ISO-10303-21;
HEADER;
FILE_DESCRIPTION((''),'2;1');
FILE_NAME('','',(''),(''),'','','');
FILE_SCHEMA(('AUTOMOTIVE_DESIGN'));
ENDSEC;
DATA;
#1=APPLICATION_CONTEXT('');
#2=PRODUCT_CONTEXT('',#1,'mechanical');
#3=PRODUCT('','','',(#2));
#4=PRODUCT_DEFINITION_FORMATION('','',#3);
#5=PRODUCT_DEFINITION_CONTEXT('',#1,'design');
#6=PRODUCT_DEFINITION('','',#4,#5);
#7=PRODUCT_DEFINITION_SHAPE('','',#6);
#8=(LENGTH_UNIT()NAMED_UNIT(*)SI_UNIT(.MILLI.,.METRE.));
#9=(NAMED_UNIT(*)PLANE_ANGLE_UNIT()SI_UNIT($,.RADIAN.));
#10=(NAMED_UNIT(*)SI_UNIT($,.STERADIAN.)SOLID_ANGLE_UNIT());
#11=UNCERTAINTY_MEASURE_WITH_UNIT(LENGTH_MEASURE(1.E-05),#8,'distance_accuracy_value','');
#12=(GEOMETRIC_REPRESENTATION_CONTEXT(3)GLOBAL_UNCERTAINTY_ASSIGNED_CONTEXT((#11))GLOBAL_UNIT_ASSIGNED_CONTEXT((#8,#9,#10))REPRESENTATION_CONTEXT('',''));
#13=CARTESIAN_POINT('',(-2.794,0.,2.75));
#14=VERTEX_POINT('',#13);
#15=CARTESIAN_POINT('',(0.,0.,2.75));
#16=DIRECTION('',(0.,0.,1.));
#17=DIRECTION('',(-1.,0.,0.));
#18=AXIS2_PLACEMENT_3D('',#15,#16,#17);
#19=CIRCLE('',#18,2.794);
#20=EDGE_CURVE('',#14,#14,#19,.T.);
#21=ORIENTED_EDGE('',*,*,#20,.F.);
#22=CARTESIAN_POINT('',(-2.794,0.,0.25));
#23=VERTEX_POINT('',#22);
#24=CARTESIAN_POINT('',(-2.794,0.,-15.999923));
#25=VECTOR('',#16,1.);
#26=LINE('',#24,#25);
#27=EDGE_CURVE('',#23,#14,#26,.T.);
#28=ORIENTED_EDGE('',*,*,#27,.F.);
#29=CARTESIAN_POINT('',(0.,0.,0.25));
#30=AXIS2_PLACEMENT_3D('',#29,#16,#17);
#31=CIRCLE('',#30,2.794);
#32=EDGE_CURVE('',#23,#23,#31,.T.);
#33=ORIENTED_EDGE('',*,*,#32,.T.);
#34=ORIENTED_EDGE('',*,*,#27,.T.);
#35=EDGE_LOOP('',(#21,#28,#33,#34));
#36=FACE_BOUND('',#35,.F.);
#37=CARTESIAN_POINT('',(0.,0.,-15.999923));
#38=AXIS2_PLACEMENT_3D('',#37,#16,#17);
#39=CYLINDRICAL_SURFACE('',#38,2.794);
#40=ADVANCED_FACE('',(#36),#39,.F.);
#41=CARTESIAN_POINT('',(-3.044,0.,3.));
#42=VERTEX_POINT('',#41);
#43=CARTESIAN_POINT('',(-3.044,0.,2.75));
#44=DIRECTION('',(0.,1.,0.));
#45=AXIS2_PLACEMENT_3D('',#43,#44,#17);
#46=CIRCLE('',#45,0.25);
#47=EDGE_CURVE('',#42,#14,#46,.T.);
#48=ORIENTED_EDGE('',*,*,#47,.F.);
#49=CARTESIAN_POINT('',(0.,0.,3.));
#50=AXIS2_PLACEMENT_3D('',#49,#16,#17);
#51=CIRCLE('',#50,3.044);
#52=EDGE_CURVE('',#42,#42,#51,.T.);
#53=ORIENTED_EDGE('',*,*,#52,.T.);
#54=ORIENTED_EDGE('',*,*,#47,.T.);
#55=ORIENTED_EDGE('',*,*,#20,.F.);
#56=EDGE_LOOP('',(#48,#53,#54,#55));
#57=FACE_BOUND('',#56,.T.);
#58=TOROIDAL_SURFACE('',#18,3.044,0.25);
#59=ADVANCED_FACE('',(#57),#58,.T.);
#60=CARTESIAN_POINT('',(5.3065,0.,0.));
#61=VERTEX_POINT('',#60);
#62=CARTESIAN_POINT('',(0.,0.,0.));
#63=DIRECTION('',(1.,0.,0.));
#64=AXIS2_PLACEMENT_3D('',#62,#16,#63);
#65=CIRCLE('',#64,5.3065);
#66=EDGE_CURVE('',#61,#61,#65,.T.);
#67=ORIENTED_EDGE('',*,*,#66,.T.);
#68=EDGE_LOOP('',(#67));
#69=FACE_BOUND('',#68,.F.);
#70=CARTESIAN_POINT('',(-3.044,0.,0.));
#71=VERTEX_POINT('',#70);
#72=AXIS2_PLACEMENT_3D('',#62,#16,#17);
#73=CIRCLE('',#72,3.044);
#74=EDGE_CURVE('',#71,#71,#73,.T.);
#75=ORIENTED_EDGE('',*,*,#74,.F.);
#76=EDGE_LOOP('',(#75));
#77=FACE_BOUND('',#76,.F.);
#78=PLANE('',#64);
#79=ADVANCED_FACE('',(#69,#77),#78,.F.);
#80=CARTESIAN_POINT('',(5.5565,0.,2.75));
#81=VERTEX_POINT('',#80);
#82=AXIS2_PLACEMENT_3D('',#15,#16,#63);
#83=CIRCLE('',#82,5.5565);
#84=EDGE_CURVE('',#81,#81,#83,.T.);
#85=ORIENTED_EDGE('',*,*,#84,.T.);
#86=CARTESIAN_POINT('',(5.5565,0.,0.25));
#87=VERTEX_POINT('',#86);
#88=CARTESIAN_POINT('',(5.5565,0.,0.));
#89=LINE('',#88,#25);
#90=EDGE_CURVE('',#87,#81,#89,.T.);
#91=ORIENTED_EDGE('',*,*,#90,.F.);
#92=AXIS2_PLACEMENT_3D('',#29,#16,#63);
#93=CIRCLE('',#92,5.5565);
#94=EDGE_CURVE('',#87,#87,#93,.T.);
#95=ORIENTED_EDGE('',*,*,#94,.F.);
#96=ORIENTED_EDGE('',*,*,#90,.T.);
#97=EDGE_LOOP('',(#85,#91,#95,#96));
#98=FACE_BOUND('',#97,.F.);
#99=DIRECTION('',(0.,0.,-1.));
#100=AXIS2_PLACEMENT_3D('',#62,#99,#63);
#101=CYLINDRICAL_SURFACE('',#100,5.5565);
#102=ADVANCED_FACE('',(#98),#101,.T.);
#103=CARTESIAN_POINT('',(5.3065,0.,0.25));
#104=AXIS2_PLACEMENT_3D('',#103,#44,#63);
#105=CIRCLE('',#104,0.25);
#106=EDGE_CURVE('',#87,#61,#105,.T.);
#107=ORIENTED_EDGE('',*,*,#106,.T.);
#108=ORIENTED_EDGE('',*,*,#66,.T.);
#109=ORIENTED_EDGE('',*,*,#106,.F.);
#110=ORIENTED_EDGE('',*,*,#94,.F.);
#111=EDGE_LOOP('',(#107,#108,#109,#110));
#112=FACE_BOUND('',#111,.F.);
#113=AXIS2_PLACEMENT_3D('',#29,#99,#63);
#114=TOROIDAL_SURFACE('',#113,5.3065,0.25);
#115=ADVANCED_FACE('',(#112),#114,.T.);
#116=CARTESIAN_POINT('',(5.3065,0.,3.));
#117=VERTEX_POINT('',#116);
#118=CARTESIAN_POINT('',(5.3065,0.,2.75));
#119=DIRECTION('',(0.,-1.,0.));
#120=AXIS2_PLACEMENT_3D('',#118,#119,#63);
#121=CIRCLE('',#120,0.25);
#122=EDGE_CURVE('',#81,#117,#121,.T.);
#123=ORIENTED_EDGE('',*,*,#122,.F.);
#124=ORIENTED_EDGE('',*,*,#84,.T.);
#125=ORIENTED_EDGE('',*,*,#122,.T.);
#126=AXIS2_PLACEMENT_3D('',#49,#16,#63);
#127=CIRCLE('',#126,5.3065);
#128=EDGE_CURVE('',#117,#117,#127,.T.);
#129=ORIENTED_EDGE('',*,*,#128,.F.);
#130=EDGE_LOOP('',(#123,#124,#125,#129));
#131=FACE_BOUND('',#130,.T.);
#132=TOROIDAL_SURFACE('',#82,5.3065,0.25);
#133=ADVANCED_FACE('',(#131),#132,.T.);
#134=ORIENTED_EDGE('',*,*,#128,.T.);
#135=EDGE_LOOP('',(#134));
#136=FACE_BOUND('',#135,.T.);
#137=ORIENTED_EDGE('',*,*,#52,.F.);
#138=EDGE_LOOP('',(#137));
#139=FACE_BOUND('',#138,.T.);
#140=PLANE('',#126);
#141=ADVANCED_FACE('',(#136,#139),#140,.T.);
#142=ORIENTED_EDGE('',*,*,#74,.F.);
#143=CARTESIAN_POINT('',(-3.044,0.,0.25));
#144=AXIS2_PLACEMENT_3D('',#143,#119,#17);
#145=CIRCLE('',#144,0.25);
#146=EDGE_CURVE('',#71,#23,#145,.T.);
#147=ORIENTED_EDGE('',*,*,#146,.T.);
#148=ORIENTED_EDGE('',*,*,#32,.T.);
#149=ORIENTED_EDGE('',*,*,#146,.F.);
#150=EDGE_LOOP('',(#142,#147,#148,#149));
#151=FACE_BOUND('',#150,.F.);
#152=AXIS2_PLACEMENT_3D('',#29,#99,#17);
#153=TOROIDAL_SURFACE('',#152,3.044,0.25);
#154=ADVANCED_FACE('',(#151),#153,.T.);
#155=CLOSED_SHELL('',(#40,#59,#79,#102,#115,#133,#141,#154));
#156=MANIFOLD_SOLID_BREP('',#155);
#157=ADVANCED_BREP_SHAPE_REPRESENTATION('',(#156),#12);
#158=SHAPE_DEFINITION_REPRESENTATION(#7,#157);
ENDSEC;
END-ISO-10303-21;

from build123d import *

# Parameters (mm, degrees)
F0_R     = 5.5565
F1_DEPTH = 3
F2_D     = 5.588
F3_R     = 0.25


with BuildPart() as f1:
    # F0 (on Top) → F1 (new body)
    with BuildSketch(Plane.XY):
        Circle(F0_R)
    extrude(amount=F1_DEPTH)

    # F2 (through all)
    with Locations(Plane(origin=(0, 0, 0), x_dir=(1, 0, 0), z_dir=(0, 0, -1))):
        with Locations((0, 0)):
            Hole(F2_D / 2)

    # F3
    f3_edges = [f1.edges().sort_by_distance(p)[0] for p in [
        (-5.5565, 0, 0),
        (-5.5565, 0, 3),
        (-2.794, 0, 3),
        (-2.794, 0, 0),
    ]]
    fillet(f3_edges, radius=F3_R)


solid = f1.part
